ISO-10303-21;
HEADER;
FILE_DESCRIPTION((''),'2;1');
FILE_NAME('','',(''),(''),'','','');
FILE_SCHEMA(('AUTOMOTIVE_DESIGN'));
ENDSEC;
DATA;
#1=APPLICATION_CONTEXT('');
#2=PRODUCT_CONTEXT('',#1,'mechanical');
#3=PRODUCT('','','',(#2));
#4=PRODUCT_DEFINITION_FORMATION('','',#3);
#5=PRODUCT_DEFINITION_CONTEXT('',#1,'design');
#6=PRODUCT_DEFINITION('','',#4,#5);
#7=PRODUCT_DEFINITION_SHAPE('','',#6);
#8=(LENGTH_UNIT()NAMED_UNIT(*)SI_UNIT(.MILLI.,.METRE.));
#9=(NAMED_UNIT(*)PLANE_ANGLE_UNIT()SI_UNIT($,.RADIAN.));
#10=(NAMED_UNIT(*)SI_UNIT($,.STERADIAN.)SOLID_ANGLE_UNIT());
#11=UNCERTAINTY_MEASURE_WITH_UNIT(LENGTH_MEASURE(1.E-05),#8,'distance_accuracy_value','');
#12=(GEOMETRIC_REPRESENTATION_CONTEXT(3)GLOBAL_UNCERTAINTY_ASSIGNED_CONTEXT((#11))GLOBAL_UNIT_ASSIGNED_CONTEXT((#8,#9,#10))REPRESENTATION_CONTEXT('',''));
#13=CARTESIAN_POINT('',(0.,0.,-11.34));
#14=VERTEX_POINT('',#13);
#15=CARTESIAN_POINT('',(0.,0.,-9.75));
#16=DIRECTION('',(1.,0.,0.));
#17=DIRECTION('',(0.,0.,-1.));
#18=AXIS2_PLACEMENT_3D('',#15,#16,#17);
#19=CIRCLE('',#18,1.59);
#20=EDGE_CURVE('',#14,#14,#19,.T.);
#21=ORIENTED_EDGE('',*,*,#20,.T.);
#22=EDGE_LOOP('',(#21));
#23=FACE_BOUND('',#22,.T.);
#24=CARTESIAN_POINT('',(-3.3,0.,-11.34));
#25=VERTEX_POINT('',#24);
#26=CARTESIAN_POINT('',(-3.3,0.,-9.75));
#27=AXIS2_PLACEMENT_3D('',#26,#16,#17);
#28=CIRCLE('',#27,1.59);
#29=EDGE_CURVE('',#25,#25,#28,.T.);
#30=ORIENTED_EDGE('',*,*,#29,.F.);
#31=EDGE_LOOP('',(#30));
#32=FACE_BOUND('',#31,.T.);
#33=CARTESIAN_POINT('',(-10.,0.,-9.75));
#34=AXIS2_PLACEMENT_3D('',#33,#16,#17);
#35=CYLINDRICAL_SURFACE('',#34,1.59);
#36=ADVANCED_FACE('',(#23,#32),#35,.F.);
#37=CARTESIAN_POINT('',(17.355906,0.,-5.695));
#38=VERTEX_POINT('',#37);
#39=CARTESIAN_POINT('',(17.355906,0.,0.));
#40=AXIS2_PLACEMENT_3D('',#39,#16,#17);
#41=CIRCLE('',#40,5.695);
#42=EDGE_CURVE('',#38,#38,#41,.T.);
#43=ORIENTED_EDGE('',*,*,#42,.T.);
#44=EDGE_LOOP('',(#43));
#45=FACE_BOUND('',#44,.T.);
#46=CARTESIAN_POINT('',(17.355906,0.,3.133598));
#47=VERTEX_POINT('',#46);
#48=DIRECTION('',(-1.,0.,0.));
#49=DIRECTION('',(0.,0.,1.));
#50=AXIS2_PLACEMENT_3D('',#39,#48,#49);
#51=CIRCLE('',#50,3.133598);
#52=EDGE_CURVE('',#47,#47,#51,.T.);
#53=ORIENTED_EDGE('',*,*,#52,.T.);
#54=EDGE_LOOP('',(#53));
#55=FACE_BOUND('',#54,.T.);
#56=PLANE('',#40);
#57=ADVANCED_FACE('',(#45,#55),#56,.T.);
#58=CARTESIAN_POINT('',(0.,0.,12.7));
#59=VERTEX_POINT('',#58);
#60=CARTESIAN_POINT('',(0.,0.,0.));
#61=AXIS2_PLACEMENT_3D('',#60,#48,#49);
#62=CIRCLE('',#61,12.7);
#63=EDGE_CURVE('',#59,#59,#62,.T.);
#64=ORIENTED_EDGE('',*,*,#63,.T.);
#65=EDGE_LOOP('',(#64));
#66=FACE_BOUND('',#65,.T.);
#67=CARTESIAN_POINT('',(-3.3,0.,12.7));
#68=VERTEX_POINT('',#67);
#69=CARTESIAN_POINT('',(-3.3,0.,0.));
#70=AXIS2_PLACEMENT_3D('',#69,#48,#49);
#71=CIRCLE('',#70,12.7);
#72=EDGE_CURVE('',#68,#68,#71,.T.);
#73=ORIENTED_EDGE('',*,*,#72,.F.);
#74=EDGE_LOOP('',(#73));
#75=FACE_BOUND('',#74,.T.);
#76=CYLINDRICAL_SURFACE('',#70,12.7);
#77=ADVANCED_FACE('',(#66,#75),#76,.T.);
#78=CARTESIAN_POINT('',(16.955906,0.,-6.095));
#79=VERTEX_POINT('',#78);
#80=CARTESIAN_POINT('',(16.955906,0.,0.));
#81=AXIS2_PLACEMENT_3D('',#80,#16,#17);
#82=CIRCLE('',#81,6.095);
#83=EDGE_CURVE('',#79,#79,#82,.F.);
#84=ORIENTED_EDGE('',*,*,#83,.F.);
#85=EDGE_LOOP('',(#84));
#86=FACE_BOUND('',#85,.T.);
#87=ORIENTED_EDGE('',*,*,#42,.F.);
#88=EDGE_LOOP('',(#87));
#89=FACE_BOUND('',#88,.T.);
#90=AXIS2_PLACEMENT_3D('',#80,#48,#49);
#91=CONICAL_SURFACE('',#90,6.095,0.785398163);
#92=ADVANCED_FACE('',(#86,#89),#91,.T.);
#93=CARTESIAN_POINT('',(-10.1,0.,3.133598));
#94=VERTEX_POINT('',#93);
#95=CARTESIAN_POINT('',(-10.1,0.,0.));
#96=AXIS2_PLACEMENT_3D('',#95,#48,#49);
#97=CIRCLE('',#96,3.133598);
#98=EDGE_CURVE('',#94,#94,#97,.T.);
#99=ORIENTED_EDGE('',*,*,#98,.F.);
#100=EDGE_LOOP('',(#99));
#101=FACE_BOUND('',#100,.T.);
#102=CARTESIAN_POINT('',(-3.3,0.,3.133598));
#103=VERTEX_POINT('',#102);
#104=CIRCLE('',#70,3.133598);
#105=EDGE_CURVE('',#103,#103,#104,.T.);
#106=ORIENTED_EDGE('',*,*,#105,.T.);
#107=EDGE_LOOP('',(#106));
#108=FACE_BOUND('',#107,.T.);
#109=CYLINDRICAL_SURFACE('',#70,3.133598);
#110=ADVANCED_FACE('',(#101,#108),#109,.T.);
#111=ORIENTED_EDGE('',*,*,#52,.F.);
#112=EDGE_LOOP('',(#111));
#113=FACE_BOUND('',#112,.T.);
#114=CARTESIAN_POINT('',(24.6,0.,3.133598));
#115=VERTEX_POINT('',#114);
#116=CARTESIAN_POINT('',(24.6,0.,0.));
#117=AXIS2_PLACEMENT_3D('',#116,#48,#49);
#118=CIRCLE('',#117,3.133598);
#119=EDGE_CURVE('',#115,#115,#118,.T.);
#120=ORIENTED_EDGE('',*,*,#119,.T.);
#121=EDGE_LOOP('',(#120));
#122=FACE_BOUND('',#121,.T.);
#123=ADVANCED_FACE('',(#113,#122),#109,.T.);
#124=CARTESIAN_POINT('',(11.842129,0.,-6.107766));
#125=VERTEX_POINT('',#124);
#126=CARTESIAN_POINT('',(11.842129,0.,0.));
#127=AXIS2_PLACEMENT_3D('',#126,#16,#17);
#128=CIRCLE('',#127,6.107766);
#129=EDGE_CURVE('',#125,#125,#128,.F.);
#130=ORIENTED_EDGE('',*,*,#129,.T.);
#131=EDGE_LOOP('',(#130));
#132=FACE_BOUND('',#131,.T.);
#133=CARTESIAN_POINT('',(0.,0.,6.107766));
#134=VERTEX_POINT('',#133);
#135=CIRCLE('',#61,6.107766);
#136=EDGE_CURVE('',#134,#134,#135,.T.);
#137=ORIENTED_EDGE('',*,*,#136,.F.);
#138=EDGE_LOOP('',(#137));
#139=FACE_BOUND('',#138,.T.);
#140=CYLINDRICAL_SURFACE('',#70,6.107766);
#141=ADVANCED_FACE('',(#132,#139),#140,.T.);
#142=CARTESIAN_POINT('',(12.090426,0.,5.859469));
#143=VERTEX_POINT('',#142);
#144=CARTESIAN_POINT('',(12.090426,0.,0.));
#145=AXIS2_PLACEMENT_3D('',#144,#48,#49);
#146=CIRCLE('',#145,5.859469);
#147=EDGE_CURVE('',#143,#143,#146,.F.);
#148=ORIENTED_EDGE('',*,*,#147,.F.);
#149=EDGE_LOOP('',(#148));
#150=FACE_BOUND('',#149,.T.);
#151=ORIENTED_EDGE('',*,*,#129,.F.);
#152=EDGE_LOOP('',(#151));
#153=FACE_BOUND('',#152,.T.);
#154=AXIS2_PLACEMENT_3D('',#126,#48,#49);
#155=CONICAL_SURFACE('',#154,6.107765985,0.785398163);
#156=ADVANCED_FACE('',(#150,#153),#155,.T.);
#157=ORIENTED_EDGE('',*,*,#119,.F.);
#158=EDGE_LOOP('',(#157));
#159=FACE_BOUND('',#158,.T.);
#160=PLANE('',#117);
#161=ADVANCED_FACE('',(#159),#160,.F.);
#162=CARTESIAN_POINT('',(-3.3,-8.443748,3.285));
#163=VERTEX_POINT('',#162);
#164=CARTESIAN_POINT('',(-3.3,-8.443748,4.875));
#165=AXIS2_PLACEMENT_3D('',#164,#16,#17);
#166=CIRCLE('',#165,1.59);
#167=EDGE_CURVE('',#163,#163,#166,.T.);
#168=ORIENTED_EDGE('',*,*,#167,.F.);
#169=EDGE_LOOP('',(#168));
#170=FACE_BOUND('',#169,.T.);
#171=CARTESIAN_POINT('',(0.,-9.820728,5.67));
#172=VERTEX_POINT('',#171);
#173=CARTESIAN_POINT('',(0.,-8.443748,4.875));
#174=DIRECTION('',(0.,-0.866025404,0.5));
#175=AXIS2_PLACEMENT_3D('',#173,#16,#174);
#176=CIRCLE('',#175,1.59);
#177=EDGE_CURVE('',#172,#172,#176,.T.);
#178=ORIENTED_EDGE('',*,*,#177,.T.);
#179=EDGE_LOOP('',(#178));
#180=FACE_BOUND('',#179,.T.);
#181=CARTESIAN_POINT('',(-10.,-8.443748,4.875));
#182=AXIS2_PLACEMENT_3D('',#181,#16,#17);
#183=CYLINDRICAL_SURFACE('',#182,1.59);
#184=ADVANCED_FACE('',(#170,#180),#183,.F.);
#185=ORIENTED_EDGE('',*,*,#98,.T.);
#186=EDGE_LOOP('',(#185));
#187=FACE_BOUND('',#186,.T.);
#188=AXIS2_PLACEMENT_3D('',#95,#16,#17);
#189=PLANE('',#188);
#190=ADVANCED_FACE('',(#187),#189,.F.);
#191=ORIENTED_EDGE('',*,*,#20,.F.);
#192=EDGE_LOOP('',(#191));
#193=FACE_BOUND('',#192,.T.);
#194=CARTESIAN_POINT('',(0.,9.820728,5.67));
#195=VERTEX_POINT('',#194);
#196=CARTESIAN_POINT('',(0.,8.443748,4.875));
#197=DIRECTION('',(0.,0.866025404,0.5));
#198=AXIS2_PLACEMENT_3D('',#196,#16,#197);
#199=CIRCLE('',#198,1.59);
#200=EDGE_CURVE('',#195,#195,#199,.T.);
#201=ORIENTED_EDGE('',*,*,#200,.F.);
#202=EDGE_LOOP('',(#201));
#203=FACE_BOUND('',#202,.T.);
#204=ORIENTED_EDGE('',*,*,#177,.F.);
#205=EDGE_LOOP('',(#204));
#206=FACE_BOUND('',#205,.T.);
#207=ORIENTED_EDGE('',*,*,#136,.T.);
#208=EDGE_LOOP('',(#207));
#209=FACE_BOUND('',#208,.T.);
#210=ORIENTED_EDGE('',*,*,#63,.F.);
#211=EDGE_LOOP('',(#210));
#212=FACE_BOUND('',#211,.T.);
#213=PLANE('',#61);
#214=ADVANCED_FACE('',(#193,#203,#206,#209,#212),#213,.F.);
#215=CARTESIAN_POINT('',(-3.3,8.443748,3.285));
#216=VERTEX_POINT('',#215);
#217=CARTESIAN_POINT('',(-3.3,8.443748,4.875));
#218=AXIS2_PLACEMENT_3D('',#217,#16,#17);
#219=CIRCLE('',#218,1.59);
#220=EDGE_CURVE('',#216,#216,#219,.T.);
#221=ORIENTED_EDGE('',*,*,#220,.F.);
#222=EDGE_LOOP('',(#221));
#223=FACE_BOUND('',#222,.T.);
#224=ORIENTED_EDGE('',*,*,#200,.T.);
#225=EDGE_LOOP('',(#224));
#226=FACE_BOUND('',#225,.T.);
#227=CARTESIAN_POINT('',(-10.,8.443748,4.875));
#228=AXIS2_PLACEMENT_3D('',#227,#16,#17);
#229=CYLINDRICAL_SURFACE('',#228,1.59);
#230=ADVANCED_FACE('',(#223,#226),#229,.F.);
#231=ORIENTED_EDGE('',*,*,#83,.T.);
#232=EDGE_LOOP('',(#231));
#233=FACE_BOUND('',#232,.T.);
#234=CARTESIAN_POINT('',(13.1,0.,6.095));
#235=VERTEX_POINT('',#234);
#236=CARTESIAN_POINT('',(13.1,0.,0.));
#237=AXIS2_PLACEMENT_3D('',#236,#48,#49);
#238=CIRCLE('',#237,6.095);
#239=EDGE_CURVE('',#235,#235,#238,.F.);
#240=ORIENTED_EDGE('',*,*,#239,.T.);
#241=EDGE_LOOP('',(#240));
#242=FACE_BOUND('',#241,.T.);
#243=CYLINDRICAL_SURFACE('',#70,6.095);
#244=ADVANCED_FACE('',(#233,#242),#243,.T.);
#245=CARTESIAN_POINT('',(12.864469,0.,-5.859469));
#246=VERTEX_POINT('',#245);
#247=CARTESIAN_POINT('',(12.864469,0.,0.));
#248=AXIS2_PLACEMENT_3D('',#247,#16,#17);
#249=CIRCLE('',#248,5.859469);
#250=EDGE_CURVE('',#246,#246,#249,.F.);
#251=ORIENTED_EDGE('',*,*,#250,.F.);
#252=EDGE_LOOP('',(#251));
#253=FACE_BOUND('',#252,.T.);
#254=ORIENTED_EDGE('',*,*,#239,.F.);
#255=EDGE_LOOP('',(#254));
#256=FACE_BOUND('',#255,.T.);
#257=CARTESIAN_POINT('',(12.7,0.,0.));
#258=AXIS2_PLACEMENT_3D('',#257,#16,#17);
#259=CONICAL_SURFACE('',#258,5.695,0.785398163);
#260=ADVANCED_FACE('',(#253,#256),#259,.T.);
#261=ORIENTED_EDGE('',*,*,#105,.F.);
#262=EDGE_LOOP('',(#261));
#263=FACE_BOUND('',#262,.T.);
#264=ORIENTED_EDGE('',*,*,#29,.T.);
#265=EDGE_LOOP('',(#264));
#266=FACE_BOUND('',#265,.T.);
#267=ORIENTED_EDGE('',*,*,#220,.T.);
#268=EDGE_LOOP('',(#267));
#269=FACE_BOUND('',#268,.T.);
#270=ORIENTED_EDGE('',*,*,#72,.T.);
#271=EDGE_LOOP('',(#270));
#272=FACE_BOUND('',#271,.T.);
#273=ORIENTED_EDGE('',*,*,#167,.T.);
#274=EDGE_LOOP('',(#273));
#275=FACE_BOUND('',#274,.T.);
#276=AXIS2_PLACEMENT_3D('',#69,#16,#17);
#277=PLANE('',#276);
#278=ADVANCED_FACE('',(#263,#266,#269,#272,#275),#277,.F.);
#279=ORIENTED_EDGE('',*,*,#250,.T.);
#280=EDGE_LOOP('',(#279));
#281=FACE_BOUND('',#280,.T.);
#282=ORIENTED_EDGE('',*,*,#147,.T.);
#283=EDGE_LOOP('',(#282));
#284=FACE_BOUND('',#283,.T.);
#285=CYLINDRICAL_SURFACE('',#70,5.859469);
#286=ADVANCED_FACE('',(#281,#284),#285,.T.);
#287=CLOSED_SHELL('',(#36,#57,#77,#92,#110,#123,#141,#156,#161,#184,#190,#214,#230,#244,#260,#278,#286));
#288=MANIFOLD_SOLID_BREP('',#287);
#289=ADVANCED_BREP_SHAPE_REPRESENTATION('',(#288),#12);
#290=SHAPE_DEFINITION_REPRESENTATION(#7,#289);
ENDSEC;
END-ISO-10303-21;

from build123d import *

# Parameters (mm, degrees)
SKETCH1_W          = 6.8
SKETCH1_H          = 3.133597909
SKETCH1_W_2        = 20.655905863
SKETCH1_W_3        = 7.244094137
SKETCH2_R          = 1.59
CUT_EXTRUDE1_DEPTH = 10
CIRPATTERN1_COUNT  = 3
CHAMFER1_SIZE      = 0.4


with BuildPart() as part:
    # Sketch1 → Revolve1 (revolve)
    with BuildSketch(Plane.XY, mode=Mode.PRIVATE) as revolve1_sk:
        with Locations((-6.7, 1.566798955)):
            Rectangle(SKETCH1_W, SKETCH1_H)
        with Locations((7.027952931, 1.566798955)):
            Rectangle(SKETCH1_W_2, SKETCH1_H)
        Polygon((17.355905863, 3.133597909), (17.355905863, 6.095), (12.7, 6.095), (12.7, 5.859469346), (12.242129105, 5.859469346), (12.242129105, 6.107765985), (0, 6.107765985), (0, 12.7), (-3.3, 12.7), (-3.3, 3.133597909), align=None)
        with Locations((20.977952931, 1.566798955)):
            Rectangle(SKETCH1_W_3, SKETCH1_H)
    revolve(revolve1_sk.sketch.rotate(Axis((-3.3, 0, 0), (1, 0, 0)), 90), axis=Axis((-3.3, 0, 0), (1, 0, 0)))

    # Sketch2 → Cut-Extrude1 (cut)
    with BuildSketch(Plane(origin=(0, 0, 0), x_dir=(0, 0, -1), z_dir=(1, 0, 0))):
        with Locations((9.75, 0)):
            Circle(SKETCH2_R)
    cut_extrude1 = extrude(amount=-CUT_EXTRUDE1_DEPTH, mode=Mode.SUBTRACT)

    # CirPattern1: Cut-Extrude1 ×3 about axis
    cirpattern1_axis = Axis((0, 0, 0), (1, 0, 0))
    for i in range(1, CIRPATTERN1_COUNT):
        add(cut_extrude1.rotate(cirpattern1_axis, i * 360 / CIRPATTERN1_COUNT), mode=Mode.SUBTRACT)

    # Chamfer1
    # the kernel refuses this chamfer: 0.4 mm, written as the material it takes off along each edge
    with BuildSketch(Plane(origin=(17.355905863, 0, 0), x_dir=(0, 0, 1), z_dir=(0, 1, 0))) as chamfer1_piece_1:
        Polygon((6.095, -CHAMFER1_SIZE), (6.095 - CHAMFER1_SIZE, 0), (6.095, 0), align=None)
    revolve(axis=Axis((17.355905863, 0, 0), (1, 0, 0)), mode=Mode.SUBTRACT)
    with BuildSketch(Plane(origin=(12.7, 0, 0), x_dir=(0, 0, 1), z_dir=(0, 1, 0))) as chamfer1_piece_2_section:
        Polygon((6.095 - CHAMFER1_SIZE, 0), (6.095, CHAMFER1_SIZE), (6.095, 0), align=None)
    chamfer1_piece_2 = revolve(axis=Axis((12.7, 0, 0), (1, 0, 0)), mode=Mode.PRIVATE)
    chamfer1_piece_2 = chamfer1_piece_2 - Plane(origin=(12.978018591, 0, 0), x_dir=(0, 0, 1), z_dir=(-1, 0, 0)) * Cylinder(5.859469346, 25, mode=Mode.PRIVATE)
    add(chamfer1_piece_2, mode=Mode.SUBTRACT)
    with BuildSketch(Plane(origin=(12.242129105, 0, 0), x_dir=(0, 0, 1), z_dir=(0, 1, 0))) as chamfer1_piece_3_section:
        Polygon((6.107765985, -CHAMFER1_SIZE), (6.107765985 - CHAMFER1_SIZE, 0), (6.107765985, 0), align=None)
    chamfer1_piece_3 = revolve(axis=Axis((12.242129105, 0, 0), (1, 0, 0)), mode=Mode.PRIVATE)
    chamfer1_piece_3 = chamfer1_piece_3 - Plane(origin=(11.970594619, 0, 0), x_dir=(0, 0, 1), z_dir=(-1, 0, 0)) * Cylinder(5.859469346, 25, mode=Mode.PRIVATE)
    add(chamfer1_piece_3, mode=Mode.SUBTRACT)


solid = part.part
